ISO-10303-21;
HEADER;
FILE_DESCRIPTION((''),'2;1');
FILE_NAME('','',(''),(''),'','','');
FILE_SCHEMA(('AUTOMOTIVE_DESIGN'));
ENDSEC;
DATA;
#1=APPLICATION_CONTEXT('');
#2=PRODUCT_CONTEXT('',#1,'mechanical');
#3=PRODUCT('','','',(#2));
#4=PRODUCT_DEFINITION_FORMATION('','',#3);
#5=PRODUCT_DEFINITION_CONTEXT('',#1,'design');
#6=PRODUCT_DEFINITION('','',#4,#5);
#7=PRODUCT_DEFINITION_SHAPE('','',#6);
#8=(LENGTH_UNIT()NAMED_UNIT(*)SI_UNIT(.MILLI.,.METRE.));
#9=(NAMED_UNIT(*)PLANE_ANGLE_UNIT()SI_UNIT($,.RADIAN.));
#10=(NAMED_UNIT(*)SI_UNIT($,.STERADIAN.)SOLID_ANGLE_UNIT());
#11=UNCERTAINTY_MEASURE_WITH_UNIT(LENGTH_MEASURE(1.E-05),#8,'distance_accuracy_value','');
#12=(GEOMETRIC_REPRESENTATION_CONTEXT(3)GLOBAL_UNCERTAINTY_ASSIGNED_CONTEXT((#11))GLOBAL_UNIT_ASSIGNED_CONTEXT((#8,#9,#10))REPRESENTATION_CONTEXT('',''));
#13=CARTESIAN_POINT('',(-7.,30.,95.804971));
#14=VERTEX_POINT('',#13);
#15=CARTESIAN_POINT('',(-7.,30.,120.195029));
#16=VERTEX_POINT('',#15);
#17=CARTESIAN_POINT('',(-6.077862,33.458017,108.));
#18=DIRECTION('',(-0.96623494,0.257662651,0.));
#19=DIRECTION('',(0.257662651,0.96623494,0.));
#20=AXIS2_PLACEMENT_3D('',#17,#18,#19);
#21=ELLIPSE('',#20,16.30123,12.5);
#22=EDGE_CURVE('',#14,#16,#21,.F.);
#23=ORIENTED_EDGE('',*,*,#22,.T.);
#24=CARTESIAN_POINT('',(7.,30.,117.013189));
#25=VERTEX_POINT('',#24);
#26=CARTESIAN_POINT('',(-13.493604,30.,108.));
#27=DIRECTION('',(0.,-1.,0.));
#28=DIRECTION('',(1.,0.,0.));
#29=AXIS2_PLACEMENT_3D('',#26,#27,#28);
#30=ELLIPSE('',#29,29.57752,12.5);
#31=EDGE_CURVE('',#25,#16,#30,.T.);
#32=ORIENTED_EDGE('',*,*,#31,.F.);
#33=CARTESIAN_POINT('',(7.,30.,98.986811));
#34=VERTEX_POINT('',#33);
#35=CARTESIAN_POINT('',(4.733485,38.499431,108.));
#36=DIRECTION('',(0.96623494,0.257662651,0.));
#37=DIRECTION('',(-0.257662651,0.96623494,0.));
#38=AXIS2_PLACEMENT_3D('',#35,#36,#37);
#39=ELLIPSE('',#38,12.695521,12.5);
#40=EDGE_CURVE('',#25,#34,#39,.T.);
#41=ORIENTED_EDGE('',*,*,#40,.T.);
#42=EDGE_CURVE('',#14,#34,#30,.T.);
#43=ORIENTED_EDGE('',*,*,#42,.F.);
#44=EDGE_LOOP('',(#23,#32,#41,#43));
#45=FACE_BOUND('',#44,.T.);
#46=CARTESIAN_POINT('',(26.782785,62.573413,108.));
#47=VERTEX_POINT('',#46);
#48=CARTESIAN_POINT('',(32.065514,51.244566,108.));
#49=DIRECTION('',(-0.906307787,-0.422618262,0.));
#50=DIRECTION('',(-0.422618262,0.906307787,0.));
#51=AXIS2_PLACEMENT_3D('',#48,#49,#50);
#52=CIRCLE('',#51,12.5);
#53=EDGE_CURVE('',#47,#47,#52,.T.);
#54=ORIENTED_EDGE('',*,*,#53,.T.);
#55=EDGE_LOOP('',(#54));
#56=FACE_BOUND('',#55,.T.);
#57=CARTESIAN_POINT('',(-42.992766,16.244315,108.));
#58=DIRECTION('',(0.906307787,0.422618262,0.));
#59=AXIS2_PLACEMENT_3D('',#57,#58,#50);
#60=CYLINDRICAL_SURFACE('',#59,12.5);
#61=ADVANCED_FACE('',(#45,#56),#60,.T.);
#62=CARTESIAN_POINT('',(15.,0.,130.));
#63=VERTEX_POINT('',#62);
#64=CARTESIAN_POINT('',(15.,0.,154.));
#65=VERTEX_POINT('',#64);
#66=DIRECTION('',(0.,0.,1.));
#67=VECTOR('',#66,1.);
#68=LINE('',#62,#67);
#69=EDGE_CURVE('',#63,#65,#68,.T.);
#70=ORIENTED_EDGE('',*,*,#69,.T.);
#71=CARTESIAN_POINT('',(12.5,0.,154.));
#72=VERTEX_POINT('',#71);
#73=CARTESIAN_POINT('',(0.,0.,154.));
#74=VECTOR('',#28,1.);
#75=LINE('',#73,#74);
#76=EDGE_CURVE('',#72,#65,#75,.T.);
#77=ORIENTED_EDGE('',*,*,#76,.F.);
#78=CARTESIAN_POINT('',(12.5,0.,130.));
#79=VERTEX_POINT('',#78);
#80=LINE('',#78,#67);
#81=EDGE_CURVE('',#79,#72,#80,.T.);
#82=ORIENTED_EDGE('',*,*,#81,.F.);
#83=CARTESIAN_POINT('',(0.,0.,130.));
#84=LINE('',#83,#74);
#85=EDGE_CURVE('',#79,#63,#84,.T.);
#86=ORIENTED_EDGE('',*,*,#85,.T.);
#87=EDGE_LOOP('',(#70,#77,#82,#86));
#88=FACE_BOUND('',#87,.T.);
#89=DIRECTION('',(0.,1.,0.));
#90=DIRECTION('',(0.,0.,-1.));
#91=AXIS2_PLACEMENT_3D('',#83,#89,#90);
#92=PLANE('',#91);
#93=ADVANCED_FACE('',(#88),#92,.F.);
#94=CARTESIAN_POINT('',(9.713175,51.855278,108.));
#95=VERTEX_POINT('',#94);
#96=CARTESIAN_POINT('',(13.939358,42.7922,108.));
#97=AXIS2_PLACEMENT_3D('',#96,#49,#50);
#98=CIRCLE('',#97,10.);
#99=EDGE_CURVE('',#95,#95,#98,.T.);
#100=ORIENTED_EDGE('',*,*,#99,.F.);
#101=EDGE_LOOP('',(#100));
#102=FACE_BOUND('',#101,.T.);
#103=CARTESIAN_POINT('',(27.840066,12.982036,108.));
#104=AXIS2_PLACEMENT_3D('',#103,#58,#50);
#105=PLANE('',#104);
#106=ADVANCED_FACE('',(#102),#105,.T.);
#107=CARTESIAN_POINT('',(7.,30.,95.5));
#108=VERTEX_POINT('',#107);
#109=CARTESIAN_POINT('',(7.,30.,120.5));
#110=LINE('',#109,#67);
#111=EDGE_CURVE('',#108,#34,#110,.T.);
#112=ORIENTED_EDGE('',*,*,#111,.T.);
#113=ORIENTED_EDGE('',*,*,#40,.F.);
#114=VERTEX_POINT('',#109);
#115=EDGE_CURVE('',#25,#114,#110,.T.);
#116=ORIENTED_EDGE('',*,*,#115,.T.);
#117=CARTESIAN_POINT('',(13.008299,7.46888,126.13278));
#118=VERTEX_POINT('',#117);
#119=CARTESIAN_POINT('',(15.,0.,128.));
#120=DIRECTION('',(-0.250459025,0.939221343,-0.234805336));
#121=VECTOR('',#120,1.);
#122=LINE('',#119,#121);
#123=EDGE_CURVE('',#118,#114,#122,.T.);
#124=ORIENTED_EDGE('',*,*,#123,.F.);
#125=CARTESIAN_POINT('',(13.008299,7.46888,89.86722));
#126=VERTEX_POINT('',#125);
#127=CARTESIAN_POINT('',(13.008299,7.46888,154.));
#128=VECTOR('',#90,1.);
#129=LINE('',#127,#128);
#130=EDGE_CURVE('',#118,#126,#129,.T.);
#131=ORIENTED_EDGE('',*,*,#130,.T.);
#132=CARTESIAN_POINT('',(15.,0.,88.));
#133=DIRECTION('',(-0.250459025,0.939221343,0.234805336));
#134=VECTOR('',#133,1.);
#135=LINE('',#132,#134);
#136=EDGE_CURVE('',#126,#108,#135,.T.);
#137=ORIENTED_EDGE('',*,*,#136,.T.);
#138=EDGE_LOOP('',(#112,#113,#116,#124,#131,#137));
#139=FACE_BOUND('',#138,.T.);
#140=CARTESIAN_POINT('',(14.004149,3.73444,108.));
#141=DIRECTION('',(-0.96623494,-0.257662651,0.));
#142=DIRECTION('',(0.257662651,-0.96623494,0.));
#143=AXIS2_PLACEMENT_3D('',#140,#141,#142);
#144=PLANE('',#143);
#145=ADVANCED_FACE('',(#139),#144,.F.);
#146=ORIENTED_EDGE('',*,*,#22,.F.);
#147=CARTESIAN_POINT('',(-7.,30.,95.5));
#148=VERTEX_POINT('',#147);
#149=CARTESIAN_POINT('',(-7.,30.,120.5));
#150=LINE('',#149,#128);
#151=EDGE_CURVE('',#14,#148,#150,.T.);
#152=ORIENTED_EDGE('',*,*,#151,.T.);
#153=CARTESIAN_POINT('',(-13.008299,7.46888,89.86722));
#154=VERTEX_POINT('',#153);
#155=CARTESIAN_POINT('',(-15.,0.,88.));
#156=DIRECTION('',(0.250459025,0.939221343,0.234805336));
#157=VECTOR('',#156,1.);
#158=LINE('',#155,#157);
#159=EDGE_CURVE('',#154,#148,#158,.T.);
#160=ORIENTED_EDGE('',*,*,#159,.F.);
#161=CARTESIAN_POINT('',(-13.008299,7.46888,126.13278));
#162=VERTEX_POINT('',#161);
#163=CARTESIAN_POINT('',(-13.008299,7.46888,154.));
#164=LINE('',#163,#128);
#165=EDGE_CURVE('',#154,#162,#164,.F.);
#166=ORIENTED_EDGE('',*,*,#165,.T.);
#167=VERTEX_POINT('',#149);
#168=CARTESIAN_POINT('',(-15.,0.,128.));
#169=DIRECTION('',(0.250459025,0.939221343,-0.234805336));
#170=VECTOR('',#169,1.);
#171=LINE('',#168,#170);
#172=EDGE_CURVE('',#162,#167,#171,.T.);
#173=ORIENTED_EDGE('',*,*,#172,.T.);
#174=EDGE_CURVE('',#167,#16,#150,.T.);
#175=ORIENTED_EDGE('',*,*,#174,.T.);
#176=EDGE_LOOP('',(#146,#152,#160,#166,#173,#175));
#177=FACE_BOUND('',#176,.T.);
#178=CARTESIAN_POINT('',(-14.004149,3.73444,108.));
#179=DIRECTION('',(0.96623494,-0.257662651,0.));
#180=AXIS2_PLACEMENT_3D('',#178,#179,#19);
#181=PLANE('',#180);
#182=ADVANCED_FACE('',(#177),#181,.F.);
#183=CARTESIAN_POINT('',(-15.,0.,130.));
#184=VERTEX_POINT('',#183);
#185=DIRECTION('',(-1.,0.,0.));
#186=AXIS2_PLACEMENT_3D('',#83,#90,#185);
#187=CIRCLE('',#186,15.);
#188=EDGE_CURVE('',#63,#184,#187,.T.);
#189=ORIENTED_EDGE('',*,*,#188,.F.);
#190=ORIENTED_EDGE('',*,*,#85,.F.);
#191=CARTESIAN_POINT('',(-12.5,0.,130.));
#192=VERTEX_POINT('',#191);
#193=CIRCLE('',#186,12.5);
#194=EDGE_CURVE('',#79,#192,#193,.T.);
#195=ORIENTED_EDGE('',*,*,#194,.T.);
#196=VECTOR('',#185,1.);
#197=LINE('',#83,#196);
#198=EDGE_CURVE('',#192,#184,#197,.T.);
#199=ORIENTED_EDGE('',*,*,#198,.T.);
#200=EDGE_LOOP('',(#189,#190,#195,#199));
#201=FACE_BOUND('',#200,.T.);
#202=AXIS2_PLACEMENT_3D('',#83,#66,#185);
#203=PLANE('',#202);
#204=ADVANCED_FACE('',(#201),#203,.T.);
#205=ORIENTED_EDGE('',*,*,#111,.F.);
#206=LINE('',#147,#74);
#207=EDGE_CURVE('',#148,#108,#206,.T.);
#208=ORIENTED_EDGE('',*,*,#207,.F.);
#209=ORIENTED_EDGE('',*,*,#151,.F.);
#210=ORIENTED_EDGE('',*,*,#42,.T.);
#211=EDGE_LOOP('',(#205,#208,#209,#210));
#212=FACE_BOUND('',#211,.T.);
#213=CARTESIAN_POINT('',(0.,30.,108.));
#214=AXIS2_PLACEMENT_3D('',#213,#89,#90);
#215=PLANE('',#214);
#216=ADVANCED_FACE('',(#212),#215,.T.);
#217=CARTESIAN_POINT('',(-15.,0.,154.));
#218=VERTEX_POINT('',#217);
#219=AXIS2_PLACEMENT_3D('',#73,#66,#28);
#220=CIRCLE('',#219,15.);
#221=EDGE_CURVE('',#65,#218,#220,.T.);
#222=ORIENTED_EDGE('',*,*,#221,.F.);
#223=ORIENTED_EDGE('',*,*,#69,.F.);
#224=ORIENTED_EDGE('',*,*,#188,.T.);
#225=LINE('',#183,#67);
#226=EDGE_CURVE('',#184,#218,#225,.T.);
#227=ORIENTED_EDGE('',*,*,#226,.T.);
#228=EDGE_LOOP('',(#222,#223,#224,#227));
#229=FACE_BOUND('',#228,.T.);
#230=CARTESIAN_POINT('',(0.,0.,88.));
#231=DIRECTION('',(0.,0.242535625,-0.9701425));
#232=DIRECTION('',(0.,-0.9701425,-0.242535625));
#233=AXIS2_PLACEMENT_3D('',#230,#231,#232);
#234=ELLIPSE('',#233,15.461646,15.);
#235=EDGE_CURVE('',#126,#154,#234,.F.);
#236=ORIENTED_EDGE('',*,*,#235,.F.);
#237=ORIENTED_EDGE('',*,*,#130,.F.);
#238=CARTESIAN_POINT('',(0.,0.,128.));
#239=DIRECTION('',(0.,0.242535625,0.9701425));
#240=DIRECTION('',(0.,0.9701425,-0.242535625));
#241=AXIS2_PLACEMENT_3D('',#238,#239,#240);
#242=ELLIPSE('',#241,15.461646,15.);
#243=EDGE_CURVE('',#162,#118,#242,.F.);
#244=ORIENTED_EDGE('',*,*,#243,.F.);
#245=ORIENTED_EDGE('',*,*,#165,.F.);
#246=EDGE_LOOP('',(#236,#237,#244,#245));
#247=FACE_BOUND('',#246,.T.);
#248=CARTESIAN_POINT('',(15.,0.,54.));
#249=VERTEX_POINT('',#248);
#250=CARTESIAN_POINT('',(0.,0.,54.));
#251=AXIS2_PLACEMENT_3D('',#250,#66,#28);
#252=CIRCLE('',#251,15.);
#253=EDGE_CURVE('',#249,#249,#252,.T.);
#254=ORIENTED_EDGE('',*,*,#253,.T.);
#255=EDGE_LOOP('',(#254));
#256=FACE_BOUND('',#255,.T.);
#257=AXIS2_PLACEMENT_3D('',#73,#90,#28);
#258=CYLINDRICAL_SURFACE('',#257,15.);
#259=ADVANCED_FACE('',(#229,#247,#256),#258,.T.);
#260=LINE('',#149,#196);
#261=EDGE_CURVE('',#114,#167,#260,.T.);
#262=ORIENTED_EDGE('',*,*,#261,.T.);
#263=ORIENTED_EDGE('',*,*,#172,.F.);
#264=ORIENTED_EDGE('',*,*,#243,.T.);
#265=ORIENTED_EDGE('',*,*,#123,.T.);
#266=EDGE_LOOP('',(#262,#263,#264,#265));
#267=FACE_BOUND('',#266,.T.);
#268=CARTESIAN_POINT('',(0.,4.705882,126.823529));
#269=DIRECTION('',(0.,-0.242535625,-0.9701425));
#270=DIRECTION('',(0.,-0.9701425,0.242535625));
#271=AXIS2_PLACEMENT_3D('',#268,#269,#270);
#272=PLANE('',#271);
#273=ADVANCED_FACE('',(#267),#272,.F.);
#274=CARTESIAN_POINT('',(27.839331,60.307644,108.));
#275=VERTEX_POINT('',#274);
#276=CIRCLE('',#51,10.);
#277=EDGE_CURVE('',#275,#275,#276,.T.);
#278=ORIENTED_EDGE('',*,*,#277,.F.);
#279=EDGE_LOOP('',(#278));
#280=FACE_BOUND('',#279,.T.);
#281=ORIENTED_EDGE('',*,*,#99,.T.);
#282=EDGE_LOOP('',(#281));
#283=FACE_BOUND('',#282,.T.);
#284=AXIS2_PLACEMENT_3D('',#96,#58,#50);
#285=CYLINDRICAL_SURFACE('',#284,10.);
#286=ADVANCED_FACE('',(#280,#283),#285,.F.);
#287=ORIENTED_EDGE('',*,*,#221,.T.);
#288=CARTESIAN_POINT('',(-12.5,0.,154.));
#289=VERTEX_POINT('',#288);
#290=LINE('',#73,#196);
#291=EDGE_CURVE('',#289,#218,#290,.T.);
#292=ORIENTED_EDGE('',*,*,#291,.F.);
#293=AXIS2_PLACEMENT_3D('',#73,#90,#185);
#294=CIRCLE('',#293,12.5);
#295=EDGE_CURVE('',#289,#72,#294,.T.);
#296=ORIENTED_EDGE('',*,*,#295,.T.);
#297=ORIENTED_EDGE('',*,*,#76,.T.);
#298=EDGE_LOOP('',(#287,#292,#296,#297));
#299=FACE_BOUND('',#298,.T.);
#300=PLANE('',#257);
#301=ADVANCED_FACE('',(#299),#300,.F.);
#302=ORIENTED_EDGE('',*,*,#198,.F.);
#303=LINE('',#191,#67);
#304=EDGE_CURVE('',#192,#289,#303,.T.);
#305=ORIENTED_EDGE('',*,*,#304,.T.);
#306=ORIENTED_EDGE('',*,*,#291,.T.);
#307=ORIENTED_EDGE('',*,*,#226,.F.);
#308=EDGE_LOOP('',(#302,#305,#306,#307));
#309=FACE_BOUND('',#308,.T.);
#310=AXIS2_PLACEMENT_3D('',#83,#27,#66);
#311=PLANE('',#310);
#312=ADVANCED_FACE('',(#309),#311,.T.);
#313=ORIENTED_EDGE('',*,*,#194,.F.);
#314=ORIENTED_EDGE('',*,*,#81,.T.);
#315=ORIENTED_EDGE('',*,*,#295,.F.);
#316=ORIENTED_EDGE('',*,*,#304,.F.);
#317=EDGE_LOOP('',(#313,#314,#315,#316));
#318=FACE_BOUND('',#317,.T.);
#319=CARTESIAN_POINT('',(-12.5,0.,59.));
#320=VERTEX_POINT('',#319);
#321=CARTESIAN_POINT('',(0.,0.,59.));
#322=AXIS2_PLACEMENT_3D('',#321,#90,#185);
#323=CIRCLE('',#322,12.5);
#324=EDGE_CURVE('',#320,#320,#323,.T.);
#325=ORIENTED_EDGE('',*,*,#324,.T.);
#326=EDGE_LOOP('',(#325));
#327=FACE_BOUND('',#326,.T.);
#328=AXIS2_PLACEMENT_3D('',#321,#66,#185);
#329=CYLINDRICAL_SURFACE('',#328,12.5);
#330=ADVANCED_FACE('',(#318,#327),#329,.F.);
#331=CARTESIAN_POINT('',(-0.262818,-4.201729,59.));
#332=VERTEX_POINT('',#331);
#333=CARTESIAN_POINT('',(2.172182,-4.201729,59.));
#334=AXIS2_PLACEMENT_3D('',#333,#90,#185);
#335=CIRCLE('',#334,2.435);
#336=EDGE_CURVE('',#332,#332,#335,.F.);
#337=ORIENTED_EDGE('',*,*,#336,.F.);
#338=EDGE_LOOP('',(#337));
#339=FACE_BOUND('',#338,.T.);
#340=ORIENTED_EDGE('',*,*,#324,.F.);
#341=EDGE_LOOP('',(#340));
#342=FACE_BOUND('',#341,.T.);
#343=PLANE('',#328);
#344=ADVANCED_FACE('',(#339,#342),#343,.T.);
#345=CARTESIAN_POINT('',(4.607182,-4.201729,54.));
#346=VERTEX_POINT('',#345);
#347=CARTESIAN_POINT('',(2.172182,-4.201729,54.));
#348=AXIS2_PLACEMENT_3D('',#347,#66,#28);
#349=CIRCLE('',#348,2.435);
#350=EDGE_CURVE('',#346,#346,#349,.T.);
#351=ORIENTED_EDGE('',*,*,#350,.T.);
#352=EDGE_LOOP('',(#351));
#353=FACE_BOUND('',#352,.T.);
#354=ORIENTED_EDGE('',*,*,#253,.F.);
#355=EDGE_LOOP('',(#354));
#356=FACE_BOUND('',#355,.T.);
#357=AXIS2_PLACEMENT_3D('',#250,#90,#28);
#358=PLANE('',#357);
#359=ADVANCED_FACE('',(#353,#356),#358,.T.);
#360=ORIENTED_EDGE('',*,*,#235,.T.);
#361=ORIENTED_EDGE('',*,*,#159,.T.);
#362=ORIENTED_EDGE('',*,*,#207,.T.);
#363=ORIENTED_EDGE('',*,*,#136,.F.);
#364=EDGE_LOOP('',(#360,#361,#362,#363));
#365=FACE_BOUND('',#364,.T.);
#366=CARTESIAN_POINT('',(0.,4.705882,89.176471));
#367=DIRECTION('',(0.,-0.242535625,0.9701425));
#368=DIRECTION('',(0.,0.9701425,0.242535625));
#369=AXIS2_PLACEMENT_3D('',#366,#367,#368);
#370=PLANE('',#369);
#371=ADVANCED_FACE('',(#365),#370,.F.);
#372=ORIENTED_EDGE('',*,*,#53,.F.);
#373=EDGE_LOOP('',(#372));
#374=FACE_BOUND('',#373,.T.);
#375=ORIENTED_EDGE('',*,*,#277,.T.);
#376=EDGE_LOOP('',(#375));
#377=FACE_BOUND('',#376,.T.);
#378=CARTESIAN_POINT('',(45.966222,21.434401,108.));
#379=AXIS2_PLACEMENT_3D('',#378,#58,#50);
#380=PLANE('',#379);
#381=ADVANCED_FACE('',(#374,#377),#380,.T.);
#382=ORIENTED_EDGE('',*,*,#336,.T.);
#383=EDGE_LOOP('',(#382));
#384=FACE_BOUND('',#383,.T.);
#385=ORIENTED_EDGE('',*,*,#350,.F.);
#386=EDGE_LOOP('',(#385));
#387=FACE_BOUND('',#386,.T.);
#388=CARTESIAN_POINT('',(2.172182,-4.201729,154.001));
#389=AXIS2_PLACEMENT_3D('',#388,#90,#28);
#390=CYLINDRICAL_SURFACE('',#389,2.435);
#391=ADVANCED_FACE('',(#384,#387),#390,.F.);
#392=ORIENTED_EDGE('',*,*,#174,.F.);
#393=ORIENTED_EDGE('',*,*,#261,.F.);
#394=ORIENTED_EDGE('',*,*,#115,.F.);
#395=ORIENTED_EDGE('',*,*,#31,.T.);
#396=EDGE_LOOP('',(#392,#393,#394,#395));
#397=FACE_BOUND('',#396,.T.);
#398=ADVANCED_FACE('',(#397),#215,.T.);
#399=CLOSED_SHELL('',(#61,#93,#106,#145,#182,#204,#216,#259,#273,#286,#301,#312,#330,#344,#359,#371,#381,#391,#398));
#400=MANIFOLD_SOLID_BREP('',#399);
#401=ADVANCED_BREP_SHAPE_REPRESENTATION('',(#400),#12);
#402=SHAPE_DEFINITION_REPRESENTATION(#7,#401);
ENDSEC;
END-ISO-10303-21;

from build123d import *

# Parameters (mm, degrees)
BOSS_EXTRUDE1_DEPTH      = 54
BOSS_EXTRUDE1_DEPTH_BACK = 46
SKETCH1_R                = 15
BOSS_EXTRUDE3_REACH      = 99.568
SKETCH20_R               = 12.5
SKETCH20_R_2             = 10
SKETCH20_3_R             = 10
CUT_EXTRUDE2_DEPTH       = 20
SKETCH22_R               = 12.5
CUT_EXTRUDE3_DEPTH       = 95
CUT_EXTRUDE6_DEPTH       = 24
CUT_EXTRUDE7_REACH       = 125.735
SKETCH23_R               = 2.435


with BuildPart() as part:
    # Sketch1 → Boss-Extrude1 (new, two sides: drawn at the far end of the back side and taken through both)
    with BuildSketch(Plane.XY.offset(-BOSS_EXTRUDE1_DEPTH_BACK)):
        Circle(SKETCH1_R)
    extrude(amount=BOSS_EXTRUDE1_DEPTH + BOSS_EXTRUDE1_DEPTH_BACK)

    # Loft1: read off the stored shape, not the designer's step
    # Loft1: loft between two sections, ruled curve by curve
    loft1_from = [
        Edge.make_line((-13.008298755, 7.468879668, 18.132780083), (-13.008298755, 7.468879668, -18.132780083)),
        Edge.make_line((-13.008298755, 7.468879668, -18.132780083), (13.008298755, 7.468879668, -18.132780083)),
        Edge.make_line((13.008298755, 7.468879668, 18.132780083), (-13.008298755, 7.468879668, 18.132780083)),
        Edge.make_line((13.008298755, 7.468879668, -18.132780083), (13.008298755, 7.468879668, 18.132780083)),
    ]
    loft1_to = [
        Edge.make_line((-7, 30, 12.5), (-7, 30, -12.5)),
        Edge.make_line((-7, 30, -12.5), (7, 30, -12.5)),
        Edge.make_line((7, 30, 12.5), (-7, 30, 12.5)),
        Edge.make_line((7, 30, -12.5), (7, 30, 12.5)),
    ]
    loft1 = Solid(Shell([*[Face.make_surface_from_curves(loft1_from[k], loft1_to[k]) for k in range(4)], Face(Wire(loft1_from)), Face(Wire(loft1_to))]))
    add(loft1)

    # Boss-Extrude3: up to this plane
    boss_extrude3_end = Plane(origin=(-14.004149378, 3.734439834, 0), z_dir=(0.9662349396012463, -0.25766265056033255, 0))
    # Sketch20 → Boss-Extrude3 (add, up to the surface)
    with BuildSketch(Plane(origin=(32.065513698, 51.244565683, 0), x_dir=(0, 0, -1), z_dir=(0.9063077870366495, 0.4226182617407006, 0)), mode=Mode.PRIVATE) as boss_extrude3_sk1:
        with Locations(Location((0, 0, 0), (0, 0, 90))):
            Circle(SKETCH20_R)
        Circle(SKETCH20_R_2, mode=Mode.SUBTRACT)
    boss_extrude3_tool1 = split(extrude(boss_extrude3_sk1.sketch, amount=-BOSS_EXTRUDE3_REACH, mode=Mode.PRIVATE), bisect_by=boss_extrude3_end, keep=Keep.BOTH, mode=Mode.PRIVATE)
    add(boss_extrude3_tool1.solids().sort_by_distance((37.198824, 40.236147, 0))[0])
    # Sketch20 → Boss-Extrude3 (add, up to the surface)
    with BuildSketch(Plane(origin=(32.065513698, 51.244565683, 0), x_dir=(0, 0, -1), z_dir=(0.9063077870366495, 0.4226182617407006, 0)), mode=Mode.PRIVATE) as boss_extrude3_sk2:
        Circle(SKETCH20_R_2)
    boss_extrude3_tool2 = split(extrude(boss_extrude3_sk2.sketch, amount=-BOSS_EXTRUDE3_REACH, mode=Mode.PRIVATE), bisect_by=boss_extrude3_end, keep=Keep.BOTH, mode=Mode.PRIVATE)
    add(boss_extrude3_tool2.solids().sort_by_distance((32.065514, 51.244566, 0))[0])

    # Sketch20<3> → Cut-Extrude2 (cut)
    with BuildSketch(Plane(origin=(32.065513698, 51.244565683, 0), x_dir=(0, 0, -1), z_dir=(0.9063077870366495, 0.4226182617407006, 0))):
        with Locations(Location((0, 0, 0), (0, 0, 90))):
            Circle(SKETCH20_3_R)
    extrude(amount=-CUT_EXTRUDE2_DEPTH, mode=Mode.SUBTRACT)

    # Sketch22 → Cut-Extrude3 (cut)
    with BuildSketch(Plane(origin=(0, 0, -46), x_dir=(-1, 0, 0), z_dir=(0, 0, -1))):
        Circle(SKETCH22_R)
    extrude(amount=-CUT_EXTRUDE3_DEPTH, mode=Mode.SUBTRACT)

    # Sketch22<3> → Cut-Extrude6 (cut)
    with BuildSketch(Plane(origin=(0, 0, -46), x_dir=(-1, 0, 0), z_dir=(0, 0, -1))):
        with BuildLine():
            ThreePointArc((12.5, 0), (0, -12.5), (-12.5, 0))
            Line((-12.5, 0), (-15, 0))
            ThreePointArc((-15, 0), (0, -15), (15, 0))
            Line((15, 0), (12.5, 0))
        make_face()
    extrude(amount=-CUT_EXTRUDE6_DEPTH, mode=Mode.SUBTRACT)

    # Sketch23 → Cut-Extrude7 (cut, up to next)
    with BuildSketch(Plane.XY.offset(54), mode=Mode.PRIVATE) as cut_extrude7_sk1:
        with Locations((2.172182, -4.201728854)):
            Circle(SKETCH23_R)
    cut_extrude7_tool1 = extrude(cut_extrude7_sk1.sketch, amount=-CUT_EXTRUDE7_REACH, mode=Mode.PRIVATE) & part.part
    add(cut_extrude7_tool1.solids().sort_by_distance((2.172182, -4.201729, 54))[0], mode=Mode.SUBTRACT)


with BuildPart() as body_2:
    # Mirror1: mirrored copy
    add(part.part.mirror(Plane.XY.offset(54)))


solid = body_2.part
